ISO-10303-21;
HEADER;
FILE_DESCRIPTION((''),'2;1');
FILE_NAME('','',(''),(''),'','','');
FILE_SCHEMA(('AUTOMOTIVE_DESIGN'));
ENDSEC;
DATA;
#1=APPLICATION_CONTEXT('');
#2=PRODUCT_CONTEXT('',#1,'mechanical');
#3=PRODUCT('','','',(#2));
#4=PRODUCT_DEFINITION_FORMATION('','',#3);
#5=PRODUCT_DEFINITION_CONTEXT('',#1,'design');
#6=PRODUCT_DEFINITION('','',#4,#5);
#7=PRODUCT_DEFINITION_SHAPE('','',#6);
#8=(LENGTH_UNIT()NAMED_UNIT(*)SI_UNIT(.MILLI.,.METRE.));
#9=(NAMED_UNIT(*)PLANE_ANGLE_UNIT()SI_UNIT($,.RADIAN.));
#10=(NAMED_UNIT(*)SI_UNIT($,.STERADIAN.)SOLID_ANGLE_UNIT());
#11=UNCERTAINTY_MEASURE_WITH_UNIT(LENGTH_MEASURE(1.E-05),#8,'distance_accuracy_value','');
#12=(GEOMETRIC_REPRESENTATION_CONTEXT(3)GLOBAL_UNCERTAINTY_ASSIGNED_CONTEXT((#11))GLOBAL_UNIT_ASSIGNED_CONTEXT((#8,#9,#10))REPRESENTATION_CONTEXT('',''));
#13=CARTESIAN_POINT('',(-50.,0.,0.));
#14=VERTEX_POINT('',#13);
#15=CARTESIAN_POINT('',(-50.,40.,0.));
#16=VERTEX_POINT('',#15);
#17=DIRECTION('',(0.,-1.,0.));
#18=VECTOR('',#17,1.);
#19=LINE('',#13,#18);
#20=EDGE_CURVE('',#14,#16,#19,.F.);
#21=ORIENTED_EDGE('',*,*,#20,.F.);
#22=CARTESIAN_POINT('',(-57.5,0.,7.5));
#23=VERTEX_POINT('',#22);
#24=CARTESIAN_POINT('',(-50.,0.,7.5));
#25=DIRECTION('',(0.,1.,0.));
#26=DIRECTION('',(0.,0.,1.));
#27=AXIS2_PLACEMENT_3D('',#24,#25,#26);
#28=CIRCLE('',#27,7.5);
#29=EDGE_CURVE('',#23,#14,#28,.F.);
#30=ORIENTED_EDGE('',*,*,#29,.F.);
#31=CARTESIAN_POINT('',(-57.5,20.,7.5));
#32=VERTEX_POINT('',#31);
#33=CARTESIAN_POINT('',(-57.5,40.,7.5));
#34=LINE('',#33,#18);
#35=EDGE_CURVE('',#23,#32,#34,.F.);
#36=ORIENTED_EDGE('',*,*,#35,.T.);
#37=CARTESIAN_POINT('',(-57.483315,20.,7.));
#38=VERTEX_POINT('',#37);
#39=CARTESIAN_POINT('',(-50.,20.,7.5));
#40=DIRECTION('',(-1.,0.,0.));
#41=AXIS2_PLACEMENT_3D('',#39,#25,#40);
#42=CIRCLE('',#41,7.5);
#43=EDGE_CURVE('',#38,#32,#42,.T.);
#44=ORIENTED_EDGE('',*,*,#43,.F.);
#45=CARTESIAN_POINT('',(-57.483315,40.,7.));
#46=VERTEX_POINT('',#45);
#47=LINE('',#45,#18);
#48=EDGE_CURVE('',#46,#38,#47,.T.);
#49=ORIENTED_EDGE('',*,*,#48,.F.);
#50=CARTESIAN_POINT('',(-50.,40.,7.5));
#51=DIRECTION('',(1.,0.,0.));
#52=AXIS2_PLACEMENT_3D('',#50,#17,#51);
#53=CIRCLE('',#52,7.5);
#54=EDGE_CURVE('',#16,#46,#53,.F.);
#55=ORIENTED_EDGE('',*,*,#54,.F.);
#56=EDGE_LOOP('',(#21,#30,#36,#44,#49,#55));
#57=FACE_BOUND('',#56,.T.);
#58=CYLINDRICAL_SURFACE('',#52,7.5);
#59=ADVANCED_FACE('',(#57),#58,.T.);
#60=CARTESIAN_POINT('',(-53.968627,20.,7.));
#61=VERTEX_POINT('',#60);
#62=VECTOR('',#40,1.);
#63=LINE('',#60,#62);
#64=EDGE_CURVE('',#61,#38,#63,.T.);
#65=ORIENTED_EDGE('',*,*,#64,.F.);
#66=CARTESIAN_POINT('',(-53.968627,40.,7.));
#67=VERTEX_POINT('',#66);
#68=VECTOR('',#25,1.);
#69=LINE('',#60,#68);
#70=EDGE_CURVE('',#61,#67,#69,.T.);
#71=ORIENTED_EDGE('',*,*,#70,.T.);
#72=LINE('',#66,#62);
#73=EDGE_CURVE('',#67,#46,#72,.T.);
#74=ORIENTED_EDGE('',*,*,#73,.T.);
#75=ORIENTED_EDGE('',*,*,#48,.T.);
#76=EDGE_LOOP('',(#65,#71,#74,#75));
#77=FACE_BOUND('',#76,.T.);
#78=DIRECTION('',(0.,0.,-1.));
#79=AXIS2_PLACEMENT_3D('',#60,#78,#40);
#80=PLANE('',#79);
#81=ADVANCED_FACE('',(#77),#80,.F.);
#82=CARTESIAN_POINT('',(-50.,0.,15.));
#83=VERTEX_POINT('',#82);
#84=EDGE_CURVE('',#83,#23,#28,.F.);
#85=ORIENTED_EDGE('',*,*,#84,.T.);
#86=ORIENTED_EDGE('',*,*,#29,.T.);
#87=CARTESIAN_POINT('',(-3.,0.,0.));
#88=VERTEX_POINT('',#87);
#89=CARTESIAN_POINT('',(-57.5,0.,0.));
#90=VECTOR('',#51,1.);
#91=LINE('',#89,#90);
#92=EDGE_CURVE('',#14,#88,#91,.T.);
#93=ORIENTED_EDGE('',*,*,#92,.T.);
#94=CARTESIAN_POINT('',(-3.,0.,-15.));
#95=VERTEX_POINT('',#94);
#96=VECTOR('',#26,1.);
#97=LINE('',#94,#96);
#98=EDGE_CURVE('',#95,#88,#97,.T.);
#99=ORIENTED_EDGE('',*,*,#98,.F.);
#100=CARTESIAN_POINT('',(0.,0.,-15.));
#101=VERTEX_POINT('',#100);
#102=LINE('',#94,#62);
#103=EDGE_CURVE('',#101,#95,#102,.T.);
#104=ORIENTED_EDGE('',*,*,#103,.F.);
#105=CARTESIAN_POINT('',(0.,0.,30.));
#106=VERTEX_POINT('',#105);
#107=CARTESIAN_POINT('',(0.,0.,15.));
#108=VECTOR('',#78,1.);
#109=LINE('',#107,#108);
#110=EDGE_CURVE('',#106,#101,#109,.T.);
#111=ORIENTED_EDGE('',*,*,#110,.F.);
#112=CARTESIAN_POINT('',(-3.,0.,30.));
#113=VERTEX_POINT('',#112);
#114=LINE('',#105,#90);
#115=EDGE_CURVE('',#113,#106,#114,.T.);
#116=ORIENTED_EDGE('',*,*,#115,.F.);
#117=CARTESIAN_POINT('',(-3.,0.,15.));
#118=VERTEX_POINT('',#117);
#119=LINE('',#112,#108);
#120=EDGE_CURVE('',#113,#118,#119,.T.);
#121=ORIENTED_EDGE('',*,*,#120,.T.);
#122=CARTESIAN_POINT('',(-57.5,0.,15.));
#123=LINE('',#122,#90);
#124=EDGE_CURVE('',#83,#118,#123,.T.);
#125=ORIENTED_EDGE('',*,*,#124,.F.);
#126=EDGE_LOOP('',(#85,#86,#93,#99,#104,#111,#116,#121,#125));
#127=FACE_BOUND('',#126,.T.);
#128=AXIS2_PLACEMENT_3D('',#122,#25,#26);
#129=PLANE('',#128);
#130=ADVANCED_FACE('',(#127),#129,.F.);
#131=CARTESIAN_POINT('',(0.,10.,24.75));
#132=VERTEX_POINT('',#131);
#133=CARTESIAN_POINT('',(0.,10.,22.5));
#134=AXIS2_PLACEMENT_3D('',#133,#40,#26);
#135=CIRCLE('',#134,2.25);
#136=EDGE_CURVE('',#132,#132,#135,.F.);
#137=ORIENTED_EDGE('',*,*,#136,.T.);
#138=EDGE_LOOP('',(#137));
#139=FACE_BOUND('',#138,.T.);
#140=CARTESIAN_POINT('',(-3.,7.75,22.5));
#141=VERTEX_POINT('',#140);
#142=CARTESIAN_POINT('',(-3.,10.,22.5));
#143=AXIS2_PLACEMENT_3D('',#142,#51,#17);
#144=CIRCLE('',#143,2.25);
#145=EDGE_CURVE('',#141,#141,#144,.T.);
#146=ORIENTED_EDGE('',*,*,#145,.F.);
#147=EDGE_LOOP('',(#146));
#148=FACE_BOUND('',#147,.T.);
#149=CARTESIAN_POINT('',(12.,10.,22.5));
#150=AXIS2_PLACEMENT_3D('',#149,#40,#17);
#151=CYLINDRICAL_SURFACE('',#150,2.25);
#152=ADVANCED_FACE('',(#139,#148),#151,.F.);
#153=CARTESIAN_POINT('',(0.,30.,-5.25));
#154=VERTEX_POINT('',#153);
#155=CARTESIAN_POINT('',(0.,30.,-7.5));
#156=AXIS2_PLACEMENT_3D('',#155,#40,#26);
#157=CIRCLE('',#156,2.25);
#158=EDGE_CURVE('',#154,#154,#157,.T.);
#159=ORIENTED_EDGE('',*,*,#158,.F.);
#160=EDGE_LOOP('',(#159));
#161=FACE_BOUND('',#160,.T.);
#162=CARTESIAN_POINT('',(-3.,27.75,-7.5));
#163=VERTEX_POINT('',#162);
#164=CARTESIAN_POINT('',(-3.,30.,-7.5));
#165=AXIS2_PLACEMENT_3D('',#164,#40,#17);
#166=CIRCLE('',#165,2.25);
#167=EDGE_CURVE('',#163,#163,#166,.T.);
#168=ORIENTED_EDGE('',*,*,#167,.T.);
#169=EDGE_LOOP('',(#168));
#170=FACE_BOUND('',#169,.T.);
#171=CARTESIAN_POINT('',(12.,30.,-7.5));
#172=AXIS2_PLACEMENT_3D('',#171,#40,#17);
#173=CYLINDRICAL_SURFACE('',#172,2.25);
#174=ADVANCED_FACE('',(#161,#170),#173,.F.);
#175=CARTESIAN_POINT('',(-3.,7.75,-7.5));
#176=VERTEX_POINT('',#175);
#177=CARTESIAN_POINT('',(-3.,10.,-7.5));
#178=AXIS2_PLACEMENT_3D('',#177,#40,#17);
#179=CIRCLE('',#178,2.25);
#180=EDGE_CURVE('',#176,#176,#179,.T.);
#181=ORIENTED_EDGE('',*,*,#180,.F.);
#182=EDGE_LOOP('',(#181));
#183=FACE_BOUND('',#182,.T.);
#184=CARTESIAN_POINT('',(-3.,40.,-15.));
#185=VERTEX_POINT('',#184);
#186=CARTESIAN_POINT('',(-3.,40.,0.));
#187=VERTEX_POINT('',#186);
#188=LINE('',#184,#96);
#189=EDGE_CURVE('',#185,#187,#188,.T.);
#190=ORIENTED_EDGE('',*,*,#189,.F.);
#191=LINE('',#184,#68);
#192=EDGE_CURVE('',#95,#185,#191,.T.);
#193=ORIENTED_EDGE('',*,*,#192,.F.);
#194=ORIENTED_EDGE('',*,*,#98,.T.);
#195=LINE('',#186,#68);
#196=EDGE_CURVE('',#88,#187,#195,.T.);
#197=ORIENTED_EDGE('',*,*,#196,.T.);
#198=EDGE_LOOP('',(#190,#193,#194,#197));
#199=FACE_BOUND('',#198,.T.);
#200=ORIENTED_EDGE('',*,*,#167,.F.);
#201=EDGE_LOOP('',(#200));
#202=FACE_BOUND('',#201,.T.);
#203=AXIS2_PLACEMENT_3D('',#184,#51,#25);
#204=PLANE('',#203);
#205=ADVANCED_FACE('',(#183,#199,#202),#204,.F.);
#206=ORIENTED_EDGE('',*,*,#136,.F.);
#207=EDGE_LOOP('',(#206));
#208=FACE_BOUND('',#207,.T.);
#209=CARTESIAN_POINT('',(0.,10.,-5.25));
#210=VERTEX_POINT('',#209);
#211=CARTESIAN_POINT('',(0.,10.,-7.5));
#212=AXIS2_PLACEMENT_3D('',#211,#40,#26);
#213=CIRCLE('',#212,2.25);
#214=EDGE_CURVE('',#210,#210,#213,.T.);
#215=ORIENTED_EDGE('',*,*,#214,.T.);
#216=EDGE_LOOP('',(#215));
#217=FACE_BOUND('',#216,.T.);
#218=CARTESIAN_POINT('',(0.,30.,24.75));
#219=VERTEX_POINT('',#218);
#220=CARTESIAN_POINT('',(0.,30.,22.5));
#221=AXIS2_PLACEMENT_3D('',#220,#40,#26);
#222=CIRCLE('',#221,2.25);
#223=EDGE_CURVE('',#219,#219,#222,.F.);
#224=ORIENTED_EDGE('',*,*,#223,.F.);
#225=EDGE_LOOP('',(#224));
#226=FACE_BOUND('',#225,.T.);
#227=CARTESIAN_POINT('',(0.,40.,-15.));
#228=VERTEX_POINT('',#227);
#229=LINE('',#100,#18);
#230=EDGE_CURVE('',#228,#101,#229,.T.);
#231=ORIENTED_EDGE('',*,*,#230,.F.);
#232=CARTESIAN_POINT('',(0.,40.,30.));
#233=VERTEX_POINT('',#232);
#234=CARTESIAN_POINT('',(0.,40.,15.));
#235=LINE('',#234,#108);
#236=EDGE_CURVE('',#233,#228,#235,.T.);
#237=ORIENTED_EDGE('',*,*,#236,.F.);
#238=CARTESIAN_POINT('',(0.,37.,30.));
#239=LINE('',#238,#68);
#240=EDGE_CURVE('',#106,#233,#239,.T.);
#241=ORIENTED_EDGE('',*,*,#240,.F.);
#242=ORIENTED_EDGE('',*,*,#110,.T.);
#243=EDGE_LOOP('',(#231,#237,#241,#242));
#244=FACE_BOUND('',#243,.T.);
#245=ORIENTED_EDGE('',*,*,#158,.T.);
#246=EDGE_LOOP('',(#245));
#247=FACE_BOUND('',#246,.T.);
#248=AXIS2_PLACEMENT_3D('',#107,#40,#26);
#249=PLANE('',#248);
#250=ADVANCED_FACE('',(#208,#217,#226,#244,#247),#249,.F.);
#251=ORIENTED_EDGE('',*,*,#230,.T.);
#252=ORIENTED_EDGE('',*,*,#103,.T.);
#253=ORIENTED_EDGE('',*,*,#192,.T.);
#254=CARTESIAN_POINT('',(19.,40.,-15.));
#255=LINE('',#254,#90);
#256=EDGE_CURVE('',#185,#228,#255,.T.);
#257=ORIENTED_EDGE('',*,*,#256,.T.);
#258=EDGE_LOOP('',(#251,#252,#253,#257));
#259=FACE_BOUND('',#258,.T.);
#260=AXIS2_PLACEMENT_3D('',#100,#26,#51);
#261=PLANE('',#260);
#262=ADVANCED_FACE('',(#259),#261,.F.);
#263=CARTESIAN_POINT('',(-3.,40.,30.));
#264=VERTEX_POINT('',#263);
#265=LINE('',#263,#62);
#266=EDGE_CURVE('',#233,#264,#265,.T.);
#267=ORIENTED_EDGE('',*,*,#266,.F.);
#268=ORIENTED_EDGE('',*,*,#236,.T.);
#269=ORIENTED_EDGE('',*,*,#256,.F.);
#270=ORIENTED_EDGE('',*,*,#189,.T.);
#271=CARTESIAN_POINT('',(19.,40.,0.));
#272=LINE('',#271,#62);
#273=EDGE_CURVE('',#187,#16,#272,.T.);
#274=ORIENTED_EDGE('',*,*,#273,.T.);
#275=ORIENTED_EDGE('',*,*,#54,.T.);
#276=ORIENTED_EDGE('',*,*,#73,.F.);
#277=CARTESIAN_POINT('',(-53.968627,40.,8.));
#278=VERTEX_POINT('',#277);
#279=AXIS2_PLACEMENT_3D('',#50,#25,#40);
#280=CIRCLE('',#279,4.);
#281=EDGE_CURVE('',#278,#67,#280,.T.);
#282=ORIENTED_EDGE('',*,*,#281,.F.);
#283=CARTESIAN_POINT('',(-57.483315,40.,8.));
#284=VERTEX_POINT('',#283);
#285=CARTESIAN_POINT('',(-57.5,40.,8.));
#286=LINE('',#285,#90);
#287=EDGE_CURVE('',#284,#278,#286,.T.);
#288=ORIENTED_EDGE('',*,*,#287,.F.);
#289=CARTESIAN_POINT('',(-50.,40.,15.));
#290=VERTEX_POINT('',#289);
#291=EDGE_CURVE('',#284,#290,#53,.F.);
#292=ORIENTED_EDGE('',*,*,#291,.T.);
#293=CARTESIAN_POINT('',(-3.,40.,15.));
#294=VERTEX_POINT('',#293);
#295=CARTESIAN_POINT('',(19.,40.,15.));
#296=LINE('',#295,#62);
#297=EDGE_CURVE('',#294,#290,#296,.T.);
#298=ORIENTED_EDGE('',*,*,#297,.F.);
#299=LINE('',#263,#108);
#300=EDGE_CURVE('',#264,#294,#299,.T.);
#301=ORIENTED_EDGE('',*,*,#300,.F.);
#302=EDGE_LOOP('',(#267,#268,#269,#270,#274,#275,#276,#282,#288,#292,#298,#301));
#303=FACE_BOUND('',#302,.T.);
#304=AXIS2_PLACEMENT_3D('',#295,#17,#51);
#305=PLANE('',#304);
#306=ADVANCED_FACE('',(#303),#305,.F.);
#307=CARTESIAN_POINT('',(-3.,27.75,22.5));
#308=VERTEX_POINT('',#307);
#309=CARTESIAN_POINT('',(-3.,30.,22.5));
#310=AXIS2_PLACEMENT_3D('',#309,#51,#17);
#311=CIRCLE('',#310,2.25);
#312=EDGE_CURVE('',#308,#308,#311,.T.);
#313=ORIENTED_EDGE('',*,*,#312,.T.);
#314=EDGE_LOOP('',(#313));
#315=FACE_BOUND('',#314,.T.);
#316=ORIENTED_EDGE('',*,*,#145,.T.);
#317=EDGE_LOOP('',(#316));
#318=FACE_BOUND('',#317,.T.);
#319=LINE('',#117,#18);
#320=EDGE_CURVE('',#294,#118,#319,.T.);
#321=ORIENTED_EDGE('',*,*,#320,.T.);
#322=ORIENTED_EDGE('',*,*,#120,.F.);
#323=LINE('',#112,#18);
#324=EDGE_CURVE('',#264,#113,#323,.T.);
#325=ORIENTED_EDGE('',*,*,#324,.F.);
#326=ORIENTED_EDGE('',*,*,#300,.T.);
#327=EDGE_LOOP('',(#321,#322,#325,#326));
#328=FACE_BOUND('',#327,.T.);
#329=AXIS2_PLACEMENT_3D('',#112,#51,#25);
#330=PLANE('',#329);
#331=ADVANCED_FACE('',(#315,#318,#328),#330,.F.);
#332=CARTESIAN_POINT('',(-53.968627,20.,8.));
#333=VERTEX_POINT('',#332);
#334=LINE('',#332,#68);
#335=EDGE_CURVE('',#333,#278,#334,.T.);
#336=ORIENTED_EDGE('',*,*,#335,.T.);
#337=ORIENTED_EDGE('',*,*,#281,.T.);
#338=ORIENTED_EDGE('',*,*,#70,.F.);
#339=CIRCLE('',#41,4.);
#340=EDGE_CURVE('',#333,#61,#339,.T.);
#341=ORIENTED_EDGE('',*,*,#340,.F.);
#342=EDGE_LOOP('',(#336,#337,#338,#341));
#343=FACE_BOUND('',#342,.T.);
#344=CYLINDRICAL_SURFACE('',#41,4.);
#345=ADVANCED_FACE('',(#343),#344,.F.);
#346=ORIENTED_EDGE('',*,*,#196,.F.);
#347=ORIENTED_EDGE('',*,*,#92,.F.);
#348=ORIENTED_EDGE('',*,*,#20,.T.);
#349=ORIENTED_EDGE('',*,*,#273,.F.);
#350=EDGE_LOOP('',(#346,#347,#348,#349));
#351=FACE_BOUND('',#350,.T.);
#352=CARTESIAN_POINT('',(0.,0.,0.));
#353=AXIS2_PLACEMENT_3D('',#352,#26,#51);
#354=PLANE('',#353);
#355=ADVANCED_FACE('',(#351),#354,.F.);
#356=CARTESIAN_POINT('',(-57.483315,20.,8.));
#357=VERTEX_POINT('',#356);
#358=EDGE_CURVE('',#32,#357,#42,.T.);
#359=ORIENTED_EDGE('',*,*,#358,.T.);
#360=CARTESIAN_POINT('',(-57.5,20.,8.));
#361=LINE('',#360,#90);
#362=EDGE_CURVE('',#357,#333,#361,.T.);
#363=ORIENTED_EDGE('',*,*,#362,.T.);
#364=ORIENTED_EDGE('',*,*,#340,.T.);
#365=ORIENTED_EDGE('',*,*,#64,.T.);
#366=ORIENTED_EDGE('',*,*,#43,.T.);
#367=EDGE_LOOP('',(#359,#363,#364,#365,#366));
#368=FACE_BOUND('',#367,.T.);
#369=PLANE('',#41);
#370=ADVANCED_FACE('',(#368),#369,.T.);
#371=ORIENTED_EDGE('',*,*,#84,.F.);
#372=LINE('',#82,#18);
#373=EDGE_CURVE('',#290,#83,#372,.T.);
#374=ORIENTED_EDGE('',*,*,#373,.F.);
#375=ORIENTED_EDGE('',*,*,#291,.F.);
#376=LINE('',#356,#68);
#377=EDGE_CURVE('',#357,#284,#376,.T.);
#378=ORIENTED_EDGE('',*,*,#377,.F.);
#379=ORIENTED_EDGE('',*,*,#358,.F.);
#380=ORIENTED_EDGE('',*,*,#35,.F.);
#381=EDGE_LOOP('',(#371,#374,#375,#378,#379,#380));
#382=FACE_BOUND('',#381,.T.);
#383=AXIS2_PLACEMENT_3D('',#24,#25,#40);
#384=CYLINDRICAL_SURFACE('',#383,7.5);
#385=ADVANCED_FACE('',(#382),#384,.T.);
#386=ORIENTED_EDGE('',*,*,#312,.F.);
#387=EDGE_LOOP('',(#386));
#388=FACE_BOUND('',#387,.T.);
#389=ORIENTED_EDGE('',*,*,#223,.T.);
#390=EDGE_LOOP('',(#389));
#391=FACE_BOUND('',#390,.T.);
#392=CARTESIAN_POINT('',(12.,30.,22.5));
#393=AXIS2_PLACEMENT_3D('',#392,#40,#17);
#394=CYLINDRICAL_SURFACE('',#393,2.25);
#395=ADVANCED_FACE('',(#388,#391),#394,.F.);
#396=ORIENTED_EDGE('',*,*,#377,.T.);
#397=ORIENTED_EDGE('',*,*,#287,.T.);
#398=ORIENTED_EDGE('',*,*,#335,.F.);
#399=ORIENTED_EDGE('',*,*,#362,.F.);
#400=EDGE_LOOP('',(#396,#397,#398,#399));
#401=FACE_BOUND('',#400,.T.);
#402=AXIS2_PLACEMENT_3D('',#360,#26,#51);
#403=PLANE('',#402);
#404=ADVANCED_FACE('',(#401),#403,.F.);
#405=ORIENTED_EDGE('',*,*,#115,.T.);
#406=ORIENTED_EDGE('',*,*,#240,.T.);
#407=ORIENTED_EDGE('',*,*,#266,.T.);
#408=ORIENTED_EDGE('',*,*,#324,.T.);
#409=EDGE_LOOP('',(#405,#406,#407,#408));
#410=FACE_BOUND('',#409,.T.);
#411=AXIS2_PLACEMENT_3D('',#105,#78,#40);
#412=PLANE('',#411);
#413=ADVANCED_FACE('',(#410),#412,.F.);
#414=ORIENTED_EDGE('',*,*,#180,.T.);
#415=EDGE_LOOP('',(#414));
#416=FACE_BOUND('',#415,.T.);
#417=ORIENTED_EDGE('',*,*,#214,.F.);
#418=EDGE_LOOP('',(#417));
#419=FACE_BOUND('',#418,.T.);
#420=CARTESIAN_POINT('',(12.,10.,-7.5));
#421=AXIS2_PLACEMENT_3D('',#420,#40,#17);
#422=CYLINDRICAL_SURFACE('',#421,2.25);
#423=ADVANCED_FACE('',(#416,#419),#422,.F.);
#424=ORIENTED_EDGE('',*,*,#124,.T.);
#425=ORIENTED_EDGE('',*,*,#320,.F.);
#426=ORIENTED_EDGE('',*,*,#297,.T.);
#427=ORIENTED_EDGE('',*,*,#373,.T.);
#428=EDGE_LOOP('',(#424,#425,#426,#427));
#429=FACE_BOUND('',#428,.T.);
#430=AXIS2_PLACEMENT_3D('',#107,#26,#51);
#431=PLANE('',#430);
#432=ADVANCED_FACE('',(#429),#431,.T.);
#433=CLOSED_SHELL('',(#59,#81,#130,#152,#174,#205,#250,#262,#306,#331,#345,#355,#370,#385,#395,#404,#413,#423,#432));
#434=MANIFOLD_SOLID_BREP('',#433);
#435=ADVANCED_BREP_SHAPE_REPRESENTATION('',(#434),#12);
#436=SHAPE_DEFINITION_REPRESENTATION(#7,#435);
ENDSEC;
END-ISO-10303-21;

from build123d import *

# Parameters (mm, degrees)
BOSS_EXTRUDE1_DEPTH     = 15
CUT_EXTRUDE1_DEPTH      = 20
FILLET1_R               = 7.5
BOSS_EXTRUDE2_DEPTH     = 15
BOSS_EXTRUDE3_DEPTH     = 15
SKETCH5_R               = 2.25
CUT_EXTRUDE2_DEPTH      = 15
CUT_EXTRUDE3_DEPTH      = 84.254129027
CUT_EXTRUDE3_DEPTH_BACK = 84.254129027
SKETCH6_W               = 26.055974234
SKETCH6_H               = 30.243547431


with BuildPart() as part:
    # Sketch1 → Boss-Extrude1 (new body)
    with BuildSketch(Plane.XY):
        Polygon((0, 0), (0, 37), (19, 37), (19, 40), (-57.5, 40), (-57.5, 0), align=None)
    extrude(amount=BOSS_EXTRUDE1_DEPTH)

    # Sketch2 → Cut-Extrude1 (cut)
    with BuildSketch(Plane(origin=(0, 40, 0), x_dir=(1, 0, 0), z_dir=(0, 1, 0))):
        with BuildLine():
            Line((-53.968626967, -7), (-57.5, -7))
            Line((-57.5, -7), (-57.5, -8))
            Line((-57.5, -8), (-53.968626967, -8))
            ThreePointArc((-53.968626967, -8), (-46, -7.5), (-53.968626967, -7))
        make_face()
    extrude(amount=-CUT_EXTRUDE1_DEPTH, mode=Mode.SUBTRACT)

    # Fillet1
    fillet1_edges = [part.edges().sort_by_distance(p)[0] for p in [
        (-57.5, 20, 0),
        (-57.5, 20, 15),
    ]]
    fillet(fillet1_edges, radius=FILLET1_R - 0.0001)  # a hair under: the kernel refuses the full size

    # Sketch3 → Boss-Extrude2 (add)
    with BuildSketch(Plane.XY.offset(15)):
        Polygon((19, 37), (0, 37), (0, 0), (-3, 0), (-3, 40), (19, 40), align=None)
    extrude(amount=BOSS_EXTRUDE2_DEPTH)

    # Sketch4 → Boss-Extrude3 (add)
    with BuildSketch(Plane(origin=(0, 0, 0), x_dir=(-1, 0, 0), z_dir=(0, 0, -1))):
        Polygon((-19, 40), (3, 40), (3, 0), (0, 0), (0, 37), (-19, 37), align=None)
    extrude(amount=BOSS_EXTRUDE3_DEPTH)

    # Sketch5 → Cut-Extrude2 (cut)
    with BuildSketch(Plane.ZY.offset(3)):
        with Locations(Location((-7.5, 30, 0), (0, 0, 270))):
            Circle(SKETCH5_R)
        with Locations(Location((-7.5, 10, 0), (0, 0, 270))):
            Circle(SKETCH5_R)
    cut_extrude2 = extrude(amount=-CUT_EXTRUDE2_DEPTH, mode=Mode.SUBTRACT)

    # Mirror1: Cut-Extrude2 across plane
    add(cut_extrude2.mirror(Plane.XY.offset(7.5)), mode=Mode.SUBTRACT)

    # Sketch6 → Cut-Extrude3 (cut, two sides: drawn at the far end of the back side and taken through both)
    with BuildSketch(Plane(origin=(0, 0, -15), x_dir=(-1, 0, 0), z_dir=(0, 0, -1)).offset(-CUT_EXTRUDE3_DEPTH_BACK)):
        with Locations((-13.027987117, 52.121773716)):
            Rectangle(SKETCH6_W, SKETCH6_H)
    extrude(amount=CUT_EXTRUDE3_DEPTH + CUT_EXTRUDE3_DEPTH_BACK, mode=Mode.SUBTRACT)


solid = part.part
